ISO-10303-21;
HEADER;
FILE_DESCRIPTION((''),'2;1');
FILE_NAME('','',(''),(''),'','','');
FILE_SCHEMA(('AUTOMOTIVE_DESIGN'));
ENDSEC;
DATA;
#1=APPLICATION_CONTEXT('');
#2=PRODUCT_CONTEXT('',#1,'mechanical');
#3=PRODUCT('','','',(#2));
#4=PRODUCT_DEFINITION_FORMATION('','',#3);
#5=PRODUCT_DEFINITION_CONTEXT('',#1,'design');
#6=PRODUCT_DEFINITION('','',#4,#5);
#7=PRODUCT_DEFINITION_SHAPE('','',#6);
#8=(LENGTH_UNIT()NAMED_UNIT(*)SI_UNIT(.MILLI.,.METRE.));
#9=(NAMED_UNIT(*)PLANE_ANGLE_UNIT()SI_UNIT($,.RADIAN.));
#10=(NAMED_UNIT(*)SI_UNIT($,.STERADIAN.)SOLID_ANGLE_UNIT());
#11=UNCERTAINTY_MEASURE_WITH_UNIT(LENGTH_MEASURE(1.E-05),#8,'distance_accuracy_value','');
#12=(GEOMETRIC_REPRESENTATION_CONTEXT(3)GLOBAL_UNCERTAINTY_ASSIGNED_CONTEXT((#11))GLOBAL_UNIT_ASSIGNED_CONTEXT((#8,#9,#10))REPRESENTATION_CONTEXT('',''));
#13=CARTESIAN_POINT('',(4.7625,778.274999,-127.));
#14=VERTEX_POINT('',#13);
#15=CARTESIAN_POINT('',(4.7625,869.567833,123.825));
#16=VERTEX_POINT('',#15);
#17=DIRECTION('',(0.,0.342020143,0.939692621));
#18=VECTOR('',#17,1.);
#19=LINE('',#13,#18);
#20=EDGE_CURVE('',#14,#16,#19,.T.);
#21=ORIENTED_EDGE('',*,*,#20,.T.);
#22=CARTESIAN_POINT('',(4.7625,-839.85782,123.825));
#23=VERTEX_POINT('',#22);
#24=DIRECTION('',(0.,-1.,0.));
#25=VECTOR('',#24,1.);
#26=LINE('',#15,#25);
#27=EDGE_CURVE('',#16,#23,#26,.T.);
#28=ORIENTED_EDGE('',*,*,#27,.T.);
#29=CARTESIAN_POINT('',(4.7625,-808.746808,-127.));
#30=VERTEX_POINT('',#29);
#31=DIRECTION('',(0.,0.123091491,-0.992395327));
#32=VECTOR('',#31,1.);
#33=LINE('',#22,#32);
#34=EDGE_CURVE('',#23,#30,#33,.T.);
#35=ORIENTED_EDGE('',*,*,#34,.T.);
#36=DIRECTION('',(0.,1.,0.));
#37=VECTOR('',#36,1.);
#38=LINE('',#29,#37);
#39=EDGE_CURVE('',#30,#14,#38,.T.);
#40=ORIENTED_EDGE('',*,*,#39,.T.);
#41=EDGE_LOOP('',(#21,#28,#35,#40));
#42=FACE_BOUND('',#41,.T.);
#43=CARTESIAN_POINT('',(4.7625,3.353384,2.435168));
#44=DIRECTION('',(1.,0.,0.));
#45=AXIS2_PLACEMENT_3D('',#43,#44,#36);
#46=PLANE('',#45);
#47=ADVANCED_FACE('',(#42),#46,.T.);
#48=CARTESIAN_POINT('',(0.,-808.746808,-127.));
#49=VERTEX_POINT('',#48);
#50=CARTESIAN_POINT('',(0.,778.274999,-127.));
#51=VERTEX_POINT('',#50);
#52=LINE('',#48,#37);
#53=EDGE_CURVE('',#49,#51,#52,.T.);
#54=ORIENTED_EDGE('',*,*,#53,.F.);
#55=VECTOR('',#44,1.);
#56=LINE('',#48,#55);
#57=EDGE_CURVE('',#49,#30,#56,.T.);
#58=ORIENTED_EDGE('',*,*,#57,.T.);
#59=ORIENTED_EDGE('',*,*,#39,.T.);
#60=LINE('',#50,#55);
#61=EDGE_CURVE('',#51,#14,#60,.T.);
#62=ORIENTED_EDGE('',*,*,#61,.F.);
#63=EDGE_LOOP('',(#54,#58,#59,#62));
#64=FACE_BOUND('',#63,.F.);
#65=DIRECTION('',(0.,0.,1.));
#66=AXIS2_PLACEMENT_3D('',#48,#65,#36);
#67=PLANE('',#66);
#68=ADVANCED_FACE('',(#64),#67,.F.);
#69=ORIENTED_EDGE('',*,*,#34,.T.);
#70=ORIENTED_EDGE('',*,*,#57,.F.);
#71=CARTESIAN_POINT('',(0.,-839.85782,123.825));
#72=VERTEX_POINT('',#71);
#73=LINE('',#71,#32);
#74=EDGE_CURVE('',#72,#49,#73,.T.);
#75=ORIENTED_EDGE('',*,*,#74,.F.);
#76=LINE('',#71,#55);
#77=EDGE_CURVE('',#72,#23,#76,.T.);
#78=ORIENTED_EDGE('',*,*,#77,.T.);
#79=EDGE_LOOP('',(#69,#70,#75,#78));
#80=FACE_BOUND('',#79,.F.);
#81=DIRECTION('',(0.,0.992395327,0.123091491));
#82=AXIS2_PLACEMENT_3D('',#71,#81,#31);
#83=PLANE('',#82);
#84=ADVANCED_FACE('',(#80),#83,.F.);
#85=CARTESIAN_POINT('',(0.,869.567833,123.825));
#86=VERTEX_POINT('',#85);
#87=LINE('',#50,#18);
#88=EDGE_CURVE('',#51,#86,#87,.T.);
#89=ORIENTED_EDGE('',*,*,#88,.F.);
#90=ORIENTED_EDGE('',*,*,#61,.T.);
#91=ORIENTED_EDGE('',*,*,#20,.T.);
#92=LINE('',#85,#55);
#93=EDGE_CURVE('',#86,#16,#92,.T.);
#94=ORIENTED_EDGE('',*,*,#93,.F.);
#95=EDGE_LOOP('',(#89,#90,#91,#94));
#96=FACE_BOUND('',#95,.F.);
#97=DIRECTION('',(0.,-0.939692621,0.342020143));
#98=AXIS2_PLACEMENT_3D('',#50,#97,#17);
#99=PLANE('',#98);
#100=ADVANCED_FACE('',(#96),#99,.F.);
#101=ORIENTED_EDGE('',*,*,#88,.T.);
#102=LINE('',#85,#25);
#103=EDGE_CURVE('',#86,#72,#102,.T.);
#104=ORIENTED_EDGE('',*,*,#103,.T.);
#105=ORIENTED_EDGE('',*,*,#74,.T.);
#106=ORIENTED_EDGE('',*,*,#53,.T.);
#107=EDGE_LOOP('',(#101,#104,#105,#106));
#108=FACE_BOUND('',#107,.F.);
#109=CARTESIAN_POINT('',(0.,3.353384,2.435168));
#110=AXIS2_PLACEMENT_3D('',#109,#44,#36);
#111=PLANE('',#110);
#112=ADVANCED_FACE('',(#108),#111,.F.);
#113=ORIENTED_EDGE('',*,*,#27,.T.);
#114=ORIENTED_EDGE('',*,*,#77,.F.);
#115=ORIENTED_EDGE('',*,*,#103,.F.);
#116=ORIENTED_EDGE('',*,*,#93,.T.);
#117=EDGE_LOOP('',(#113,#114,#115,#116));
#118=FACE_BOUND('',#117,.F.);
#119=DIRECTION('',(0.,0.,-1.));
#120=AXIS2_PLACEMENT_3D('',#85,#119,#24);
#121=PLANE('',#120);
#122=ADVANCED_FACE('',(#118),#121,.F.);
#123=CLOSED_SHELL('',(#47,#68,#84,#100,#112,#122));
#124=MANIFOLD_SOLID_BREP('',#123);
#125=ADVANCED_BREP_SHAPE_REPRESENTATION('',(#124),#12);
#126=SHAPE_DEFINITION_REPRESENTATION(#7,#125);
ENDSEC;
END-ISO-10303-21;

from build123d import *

# Parameters (mm, degrees)
F1_DEPTH = 4.7625


# Not quite as in the source:
# - a length typed as a fraction of an inch, garbled in the dataset ("3 / 203.2 mm" for 3/8 in), is restored


with BuildPart() as f1:
    # F0 (on Right) → F1 (new body)
    with BuildSketch(Plane.YZ):
        Polygon((-839.8578202019, 123.825), (-808.7468078986, -127), (778.2749994396, -127), (869.5678334494, 123.825), align=None)
    extrude(amount=F1_DEPTH)


solid = f1.part
